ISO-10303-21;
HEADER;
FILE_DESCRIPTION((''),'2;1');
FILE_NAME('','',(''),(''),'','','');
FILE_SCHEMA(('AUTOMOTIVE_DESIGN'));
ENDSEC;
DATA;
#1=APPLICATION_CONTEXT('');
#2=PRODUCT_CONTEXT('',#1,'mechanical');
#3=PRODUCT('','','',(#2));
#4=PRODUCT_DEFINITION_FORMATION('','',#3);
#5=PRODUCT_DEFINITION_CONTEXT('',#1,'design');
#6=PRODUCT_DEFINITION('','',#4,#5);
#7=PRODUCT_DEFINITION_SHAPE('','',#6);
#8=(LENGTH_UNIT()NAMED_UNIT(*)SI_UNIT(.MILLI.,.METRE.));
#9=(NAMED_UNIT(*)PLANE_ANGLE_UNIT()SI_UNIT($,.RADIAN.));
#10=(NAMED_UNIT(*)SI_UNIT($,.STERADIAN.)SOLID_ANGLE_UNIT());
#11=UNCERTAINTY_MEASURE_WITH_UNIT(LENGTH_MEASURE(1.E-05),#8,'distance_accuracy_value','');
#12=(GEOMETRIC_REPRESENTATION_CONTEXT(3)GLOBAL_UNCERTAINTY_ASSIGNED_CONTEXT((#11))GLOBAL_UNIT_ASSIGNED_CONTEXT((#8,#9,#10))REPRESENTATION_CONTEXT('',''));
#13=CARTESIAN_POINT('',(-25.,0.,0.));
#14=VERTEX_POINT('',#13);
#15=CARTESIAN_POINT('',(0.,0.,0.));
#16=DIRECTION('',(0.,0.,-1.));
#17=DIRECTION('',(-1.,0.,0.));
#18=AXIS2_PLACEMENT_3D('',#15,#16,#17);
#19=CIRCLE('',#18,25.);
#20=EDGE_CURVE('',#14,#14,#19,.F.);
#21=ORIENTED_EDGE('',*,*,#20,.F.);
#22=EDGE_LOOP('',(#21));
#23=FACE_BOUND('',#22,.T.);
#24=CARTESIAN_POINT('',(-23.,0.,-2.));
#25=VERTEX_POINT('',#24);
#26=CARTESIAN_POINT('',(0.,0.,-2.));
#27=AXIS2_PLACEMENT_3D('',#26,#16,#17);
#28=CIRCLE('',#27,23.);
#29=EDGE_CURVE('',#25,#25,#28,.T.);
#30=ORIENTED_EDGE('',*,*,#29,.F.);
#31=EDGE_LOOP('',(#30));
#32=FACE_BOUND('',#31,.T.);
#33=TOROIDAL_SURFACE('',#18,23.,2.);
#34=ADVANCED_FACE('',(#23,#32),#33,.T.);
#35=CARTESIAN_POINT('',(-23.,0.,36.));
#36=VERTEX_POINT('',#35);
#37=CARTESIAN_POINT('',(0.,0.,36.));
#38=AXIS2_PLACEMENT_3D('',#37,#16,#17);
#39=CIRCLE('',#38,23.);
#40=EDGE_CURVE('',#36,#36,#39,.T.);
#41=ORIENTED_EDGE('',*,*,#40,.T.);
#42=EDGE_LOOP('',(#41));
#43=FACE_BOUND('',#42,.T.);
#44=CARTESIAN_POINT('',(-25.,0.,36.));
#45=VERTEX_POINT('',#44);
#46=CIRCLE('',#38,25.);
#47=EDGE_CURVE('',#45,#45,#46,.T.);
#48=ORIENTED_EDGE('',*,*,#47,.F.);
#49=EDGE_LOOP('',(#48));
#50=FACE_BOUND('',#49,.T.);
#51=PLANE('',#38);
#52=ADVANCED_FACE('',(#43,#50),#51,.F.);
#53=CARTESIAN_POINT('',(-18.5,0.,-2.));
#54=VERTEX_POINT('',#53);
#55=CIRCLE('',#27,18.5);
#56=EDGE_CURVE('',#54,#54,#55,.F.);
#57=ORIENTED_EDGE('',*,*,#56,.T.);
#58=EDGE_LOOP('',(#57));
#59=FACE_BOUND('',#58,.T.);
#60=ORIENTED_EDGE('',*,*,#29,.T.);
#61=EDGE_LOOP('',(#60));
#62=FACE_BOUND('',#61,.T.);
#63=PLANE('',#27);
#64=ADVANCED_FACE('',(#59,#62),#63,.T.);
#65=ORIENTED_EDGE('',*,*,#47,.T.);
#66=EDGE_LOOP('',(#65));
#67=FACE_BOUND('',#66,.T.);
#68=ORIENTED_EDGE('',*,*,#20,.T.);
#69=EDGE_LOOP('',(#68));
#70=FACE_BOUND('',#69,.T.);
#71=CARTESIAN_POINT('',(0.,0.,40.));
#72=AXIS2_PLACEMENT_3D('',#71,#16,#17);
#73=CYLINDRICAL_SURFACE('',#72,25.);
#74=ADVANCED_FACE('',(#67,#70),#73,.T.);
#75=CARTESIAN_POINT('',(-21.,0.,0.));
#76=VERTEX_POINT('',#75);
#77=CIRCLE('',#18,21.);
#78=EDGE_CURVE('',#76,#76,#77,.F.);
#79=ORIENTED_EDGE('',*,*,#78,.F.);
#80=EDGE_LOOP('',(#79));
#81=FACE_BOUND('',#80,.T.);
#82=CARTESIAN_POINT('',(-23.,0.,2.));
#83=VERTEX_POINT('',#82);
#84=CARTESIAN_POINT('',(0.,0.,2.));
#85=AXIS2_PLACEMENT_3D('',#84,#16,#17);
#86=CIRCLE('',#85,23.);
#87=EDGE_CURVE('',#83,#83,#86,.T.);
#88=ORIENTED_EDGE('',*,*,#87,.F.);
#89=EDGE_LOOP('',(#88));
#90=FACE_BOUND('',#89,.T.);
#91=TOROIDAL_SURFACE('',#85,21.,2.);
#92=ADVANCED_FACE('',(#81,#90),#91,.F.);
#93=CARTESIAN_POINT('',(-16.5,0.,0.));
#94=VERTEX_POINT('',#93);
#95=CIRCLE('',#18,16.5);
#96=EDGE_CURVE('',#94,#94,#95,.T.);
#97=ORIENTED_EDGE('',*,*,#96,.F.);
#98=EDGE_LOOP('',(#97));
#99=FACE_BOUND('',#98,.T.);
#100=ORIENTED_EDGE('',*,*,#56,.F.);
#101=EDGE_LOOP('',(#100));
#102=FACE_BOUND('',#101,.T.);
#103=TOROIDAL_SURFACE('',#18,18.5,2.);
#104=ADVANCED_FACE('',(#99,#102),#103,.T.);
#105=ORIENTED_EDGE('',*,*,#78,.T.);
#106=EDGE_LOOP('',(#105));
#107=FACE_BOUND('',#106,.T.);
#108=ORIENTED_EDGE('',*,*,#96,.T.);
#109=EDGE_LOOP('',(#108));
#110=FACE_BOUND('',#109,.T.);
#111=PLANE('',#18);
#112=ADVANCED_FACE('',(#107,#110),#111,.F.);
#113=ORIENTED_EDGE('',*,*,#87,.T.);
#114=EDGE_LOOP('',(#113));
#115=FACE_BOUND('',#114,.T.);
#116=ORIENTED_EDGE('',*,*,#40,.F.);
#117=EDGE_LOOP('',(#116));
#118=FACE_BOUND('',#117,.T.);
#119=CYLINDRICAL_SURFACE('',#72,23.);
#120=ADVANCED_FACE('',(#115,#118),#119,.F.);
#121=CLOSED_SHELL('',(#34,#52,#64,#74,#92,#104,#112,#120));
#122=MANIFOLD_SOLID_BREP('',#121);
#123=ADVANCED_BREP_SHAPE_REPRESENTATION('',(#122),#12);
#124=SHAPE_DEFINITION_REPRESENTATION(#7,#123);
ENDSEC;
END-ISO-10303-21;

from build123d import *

# Parameters (mm, degrees)
SKETCH_1_R          = 25
SKETCH_1_R_2        = 23
EXTRUDE_1_DEPTH     = 40
EXTRUDE_START       = 2
SKETCH_2_R          = 25
EXTRUDE_2_DEPTH     = 2
SKETCH_3_R          = 16.5
CUT_EXTRUDE_1_DEPTH = 2
FILLET_1_R          = 2
FILLET_2_R          = 2
FILLET_3_R          = 2
SKETCH_4_W          = 61.708706265
SKETCH_4_H          = 81.66323808
CUT_EXTRUDE_2_DEPTH = 4


with BuildPart() as part:
    # 草图1 → 凸台-拉伸1 (new body)
    with BuildSketch(Plane.XY):
        Circle(SKETCH_1_R)
        Circle(SKETCH_1_R_2, mode=Mode.SUBTRACT)
    extrude(amount=EXTRUDE_1_DEPTH)

    # 草图2 → 凸台-拉伸2 (add)
    with BuildSketch(Plane(origin=(0, 0, 0), x_dir=(-1, 0, 0), z_dir=(0, 0, -1)).offset(EXTRUDE_START)):
        Circle(SKETCH_2_R)
    extrude(amount=-EXTRUDE_2_DEPTH)

    # 草图3 → 切除-拉伸1 (cut)
    with BuildSketch(Plane(origin=(0, 0, -2), x_dir=(-1, 0, 0), z_dir=(0, 0, -1))):
        Circle(SKETCH_3_R)
    extrude(amount=-CUT_EXTRUDE_1_DEPTH, mode=Mode.SUBTRACT)

    # 圆角1
    fillet_1_edges = [part.edges().sort_by_distance(p)[0] for p in [
        (25, 0, -2),
    ]]
    fillet(fillet_1_edges, radius=FILLET_1_R - 0.0001)  # a hair under: the kernel refuses the full size

    # 圆角2
    fillet_2_edges = [part.edges().sort_by_distance(p)[0] for p in [
        (-23, 0, 0),
    ]]
    fillet(fillet_2_edges, radius=FILLET_2_R)

    # 圆角3
    fillet_3_edges = [part.edges().sort_by_distance(p)[0] for p in [
        (16.5, 0, -2),
    ]]
    fillet(fillet_3_edges, radius=FILLET_3_R - 0.0001)  # a hair under: the kernel refuses the full size

    # 草图4 → 切除-拉伸2 (cut)
    with BuildSketch(Plane.XY.offset(40)):
        with Locations((-0.068337437, -3.724390356)):
            Rectangle(SKETCH_4_W, SKETCH_4_H)
    extrude(amount=-CUT_EXTRUDE_2_DEPTH, mode=Mode.SUBTRACT)


solid = part.part
